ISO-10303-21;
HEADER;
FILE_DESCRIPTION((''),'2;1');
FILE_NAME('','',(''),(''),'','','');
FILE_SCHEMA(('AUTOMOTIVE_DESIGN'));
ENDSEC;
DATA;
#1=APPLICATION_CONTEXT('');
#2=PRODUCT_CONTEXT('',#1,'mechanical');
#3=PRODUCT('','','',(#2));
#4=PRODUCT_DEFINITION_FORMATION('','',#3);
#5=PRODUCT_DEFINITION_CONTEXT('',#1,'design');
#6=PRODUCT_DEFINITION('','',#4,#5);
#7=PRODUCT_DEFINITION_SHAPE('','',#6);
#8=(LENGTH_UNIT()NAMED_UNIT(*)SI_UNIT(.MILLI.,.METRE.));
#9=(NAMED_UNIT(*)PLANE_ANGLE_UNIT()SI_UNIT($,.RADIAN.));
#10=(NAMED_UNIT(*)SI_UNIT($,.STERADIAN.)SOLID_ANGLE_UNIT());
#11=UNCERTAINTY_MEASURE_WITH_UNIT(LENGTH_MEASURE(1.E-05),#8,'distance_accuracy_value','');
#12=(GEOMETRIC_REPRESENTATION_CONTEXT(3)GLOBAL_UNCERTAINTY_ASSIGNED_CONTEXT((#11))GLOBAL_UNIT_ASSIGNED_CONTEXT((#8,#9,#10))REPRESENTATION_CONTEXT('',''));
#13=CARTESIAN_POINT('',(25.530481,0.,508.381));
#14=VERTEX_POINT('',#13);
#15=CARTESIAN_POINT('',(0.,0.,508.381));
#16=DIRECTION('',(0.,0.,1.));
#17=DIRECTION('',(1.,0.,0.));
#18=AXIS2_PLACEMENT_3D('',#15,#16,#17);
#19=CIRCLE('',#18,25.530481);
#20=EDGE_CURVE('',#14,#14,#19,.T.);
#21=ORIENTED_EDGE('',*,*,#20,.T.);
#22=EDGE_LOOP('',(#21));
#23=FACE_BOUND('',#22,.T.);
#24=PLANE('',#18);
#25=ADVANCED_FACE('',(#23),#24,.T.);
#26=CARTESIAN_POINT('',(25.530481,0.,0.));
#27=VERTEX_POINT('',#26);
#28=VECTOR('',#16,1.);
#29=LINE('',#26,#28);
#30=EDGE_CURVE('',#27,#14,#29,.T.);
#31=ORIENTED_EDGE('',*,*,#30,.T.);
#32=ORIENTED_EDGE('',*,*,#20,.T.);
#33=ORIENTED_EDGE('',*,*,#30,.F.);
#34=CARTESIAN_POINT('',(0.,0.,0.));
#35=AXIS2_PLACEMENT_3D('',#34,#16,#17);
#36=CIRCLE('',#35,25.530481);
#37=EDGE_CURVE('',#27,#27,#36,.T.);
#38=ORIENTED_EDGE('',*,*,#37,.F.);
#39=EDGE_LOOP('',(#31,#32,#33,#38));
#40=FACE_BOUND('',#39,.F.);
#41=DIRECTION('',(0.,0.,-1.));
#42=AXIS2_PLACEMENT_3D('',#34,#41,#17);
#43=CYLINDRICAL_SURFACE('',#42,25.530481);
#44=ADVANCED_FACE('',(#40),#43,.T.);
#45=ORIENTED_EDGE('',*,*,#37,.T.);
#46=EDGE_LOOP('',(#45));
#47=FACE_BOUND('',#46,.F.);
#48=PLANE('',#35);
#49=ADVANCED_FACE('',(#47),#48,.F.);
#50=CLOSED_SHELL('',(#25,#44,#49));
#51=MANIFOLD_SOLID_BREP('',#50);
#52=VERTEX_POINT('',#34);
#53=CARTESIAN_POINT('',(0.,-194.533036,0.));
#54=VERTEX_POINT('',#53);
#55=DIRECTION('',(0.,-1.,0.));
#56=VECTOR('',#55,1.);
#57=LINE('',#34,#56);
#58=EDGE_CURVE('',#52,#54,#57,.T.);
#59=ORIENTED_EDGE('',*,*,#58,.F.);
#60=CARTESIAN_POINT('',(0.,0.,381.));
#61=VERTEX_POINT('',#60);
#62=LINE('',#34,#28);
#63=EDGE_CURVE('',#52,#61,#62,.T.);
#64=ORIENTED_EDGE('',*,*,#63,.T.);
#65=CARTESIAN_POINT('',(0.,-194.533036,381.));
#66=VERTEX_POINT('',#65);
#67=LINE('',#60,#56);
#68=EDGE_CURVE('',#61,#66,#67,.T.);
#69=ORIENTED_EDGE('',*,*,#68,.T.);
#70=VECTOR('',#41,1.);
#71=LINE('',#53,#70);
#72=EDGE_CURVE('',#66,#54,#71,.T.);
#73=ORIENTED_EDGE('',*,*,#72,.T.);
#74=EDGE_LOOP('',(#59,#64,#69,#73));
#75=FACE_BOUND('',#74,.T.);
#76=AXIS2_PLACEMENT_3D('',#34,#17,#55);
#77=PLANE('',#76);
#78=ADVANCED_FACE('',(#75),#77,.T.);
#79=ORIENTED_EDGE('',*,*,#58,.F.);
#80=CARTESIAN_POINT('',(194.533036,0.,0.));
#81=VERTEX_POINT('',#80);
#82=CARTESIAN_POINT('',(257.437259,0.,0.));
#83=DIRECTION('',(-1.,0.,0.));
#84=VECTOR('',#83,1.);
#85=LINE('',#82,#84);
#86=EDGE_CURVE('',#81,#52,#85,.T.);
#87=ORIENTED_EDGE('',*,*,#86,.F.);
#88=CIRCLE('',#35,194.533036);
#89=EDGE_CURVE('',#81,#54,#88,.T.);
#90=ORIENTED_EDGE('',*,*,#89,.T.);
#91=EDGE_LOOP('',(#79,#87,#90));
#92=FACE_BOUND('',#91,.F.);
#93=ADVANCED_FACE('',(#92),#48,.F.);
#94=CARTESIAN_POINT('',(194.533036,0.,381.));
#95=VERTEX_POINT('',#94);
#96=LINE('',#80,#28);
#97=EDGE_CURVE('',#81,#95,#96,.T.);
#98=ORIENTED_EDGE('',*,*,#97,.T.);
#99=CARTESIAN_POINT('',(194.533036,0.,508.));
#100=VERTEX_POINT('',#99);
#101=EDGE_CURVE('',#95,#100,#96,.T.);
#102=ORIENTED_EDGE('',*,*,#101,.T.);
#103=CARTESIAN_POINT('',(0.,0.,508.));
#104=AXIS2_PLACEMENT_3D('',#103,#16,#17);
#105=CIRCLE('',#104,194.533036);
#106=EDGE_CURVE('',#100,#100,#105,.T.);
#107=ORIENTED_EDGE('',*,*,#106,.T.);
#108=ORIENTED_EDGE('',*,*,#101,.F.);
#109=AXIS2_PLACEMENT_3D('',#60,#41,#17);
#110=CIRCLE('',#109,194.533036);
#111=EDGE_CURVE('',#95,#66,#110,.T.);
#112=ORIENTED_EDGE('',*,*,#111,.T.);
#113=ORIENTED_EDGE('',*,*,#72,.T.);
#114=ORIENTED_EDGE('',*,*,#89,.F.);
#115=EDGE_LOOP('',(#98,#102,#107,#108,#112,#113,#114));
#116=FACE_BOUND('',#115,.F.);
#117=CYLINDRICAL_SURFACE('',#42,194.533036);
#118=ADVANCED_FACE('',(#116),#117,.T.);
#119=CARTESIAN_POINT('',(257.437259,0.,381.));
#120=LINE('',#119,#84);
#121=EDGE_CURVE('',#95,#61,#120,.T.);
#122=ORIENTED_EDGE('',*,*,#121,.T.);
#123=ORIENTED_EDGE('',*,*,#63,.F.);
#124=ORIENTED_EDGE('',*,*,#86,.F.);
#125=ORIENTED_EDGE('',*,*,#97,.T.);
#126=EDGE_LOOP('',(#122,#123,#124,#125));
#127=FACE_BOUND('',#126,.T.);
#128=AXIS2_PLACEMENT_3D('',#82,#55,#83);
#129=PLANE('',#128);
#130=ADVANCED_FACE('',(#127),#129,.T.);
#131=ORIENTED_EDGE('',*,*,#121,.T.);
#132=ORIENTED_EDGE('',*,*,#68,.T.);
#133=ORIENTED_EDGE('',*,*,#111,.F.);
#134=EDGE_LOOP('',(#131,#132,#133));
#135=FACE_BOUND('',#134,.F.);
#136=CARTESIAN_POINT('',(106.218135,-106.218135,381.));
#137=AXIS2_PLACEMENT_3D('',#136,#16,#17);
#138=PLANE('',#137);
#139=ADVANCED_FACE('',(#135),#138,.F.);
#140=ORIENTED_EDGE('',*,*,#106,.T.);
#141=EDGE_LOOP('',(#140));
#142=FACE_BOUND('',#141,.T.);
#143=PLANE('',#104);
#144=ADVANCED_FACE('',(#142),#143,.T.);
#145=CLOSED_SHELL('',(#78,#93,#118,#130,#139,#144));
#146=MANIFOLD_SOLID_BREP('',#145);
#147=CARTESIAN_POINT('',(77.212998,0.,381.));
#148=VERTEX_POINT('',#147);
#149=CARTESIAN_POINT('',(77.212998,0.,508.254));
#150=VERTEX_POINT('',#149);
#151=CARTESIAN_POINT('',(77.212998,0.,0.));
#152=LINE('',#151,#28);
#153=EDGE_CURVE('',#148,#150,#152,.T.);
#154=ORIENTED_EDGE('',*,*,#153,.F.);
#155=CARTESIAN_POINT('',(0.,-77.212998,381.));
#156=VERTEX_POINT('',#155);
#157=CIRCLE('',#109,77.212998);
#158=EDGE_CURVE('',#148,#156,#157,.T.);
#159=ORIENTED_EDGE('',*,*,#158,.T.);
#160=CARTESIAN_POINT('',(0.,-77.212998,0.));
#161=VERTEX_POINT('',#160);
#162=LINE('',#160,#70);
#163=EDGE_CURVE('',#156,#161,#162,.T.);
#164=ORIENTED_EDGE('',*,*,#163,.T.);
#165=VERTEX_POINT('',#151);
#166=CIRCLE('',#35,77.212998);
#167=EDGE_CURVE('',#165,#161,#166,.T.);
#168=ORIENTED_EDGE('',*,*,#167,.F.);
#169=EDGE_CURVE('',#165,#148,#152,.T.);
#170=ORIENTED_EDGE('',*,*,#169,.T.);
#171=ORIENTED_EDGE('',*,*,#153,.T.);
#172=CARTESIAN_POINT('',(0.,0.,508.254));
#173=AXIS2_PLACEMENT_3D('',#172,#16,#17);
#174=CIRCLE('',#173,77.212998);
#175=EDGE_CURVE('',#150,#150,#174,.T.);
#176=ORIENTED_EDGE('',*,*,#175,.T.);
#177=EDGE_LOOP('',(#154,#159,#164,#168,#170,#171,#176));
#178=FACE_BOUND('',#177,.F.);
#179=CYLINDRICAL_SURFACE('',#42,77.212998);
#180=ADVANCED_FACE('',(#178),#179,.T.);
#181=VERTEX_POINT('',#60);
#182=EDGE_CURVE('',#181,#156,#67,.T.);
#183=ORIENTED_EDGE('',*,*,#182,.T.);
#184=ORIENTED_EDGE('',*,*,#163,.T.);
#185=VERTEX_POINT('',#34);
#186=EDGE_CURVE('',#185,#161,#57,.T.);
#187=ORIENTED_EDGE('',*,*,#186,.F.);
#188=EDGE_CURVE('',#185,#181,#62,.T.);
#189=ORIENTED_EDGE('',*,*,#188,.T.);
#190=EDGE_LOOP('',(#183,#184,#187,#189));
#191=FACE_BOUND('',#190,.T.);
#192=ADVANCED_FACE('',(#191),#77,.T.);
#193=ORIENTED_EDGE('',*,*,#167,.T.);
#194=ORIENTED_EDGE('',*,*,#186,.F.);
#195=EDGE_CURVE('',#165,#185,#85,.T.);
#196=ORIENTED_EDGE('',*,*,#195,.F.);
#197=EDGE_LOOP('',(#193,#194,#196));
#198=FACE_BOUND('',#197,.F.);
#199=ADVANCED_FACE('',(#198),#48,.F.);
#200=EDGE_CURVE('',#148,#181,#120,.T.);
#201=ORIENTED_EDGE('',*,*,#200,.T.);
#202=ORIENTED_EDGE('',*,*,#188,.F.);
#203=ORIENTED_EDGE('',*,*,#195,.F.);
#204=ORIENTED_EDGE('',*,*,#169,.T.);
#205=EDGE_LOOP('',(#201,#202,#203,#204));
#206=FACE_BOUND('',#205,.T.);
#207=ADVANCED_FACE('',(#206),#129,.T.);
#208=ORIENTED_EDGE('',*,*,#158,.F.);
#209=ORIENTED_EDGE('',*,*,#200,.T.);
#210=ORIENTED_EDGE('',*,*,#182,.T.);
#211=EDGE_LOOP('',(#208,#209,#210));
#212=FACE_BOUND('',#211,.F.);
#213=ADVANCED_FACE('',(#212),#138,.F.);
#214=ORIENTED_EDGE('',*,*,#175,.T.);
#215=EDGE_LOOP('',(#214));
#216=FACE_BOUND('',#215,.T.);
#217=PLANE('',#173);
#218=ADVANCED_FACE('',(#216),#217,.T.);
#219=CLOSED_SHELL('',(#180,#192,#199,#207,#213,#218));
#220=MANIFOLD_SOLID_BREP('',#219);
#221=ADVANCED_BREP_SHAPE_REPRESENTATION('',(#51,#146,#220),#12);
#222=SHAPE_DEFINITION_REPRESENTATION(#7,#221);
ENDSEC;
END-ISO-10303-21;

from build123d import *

# Parameters (mm, degrees)
F0_R     = 194.5330357486
F3_DEPTH = 508
F1_R     = 77.2129975411
F4_DEPTH = 508.254
F2_R     = 25.5304809281
F5_DEPTH = 508.381
F7_DEPTH = 381


with BuildPart() as f3:
    # F0 (on Top) → F3 (new body)
    with BuildSketch(Plane.XY):
        Circle(F0_R)
    extrude(amount=F3_DEPTH)


with BuildPart() as f4:
    # F1 (on Top) → F4 (new body)
    with BuildSketch(Plane.XY):
        Circle(F1_R)
    extrude(amount=F4_DEPTH)


with BuildPart() as f5:
    # F2 (on Top) → F5 (new body)
    with BuildSketch(Plane.XY):
        Circle(F2_R)
    extrude(amount=F5_DEPTH)


with BuildPart() as f7_tool:
    # F6 (on Top) → F7 (new body)
    with BuildSketch(Plane.XY):
        with BuildLine():
            Line((257.4372589588, 0), (0, 0))
            Line((0, 0), (0, -257.4372589588))
            ThreePointArc((0, -257.4372589588), (182.0356315399, -182.0356315399), (257.4372589588, 0))
        make_face()
    extrude(amount=F7_DEPTH)


with BuildPart() as f3_1:
    add(f3.part)

    # F7: cut by f7_tool
    add(f7_tool.part, mode=Mode.SUBTRACT)


with BuildPart() as f4_1:
    add(f4.part)

    # F7: cut by f7_tool
    add(f7_tool.part, mode=Mode.SUBTRACT)


solid = Compound([f5.part, f3_1.part, f4_1.part])
